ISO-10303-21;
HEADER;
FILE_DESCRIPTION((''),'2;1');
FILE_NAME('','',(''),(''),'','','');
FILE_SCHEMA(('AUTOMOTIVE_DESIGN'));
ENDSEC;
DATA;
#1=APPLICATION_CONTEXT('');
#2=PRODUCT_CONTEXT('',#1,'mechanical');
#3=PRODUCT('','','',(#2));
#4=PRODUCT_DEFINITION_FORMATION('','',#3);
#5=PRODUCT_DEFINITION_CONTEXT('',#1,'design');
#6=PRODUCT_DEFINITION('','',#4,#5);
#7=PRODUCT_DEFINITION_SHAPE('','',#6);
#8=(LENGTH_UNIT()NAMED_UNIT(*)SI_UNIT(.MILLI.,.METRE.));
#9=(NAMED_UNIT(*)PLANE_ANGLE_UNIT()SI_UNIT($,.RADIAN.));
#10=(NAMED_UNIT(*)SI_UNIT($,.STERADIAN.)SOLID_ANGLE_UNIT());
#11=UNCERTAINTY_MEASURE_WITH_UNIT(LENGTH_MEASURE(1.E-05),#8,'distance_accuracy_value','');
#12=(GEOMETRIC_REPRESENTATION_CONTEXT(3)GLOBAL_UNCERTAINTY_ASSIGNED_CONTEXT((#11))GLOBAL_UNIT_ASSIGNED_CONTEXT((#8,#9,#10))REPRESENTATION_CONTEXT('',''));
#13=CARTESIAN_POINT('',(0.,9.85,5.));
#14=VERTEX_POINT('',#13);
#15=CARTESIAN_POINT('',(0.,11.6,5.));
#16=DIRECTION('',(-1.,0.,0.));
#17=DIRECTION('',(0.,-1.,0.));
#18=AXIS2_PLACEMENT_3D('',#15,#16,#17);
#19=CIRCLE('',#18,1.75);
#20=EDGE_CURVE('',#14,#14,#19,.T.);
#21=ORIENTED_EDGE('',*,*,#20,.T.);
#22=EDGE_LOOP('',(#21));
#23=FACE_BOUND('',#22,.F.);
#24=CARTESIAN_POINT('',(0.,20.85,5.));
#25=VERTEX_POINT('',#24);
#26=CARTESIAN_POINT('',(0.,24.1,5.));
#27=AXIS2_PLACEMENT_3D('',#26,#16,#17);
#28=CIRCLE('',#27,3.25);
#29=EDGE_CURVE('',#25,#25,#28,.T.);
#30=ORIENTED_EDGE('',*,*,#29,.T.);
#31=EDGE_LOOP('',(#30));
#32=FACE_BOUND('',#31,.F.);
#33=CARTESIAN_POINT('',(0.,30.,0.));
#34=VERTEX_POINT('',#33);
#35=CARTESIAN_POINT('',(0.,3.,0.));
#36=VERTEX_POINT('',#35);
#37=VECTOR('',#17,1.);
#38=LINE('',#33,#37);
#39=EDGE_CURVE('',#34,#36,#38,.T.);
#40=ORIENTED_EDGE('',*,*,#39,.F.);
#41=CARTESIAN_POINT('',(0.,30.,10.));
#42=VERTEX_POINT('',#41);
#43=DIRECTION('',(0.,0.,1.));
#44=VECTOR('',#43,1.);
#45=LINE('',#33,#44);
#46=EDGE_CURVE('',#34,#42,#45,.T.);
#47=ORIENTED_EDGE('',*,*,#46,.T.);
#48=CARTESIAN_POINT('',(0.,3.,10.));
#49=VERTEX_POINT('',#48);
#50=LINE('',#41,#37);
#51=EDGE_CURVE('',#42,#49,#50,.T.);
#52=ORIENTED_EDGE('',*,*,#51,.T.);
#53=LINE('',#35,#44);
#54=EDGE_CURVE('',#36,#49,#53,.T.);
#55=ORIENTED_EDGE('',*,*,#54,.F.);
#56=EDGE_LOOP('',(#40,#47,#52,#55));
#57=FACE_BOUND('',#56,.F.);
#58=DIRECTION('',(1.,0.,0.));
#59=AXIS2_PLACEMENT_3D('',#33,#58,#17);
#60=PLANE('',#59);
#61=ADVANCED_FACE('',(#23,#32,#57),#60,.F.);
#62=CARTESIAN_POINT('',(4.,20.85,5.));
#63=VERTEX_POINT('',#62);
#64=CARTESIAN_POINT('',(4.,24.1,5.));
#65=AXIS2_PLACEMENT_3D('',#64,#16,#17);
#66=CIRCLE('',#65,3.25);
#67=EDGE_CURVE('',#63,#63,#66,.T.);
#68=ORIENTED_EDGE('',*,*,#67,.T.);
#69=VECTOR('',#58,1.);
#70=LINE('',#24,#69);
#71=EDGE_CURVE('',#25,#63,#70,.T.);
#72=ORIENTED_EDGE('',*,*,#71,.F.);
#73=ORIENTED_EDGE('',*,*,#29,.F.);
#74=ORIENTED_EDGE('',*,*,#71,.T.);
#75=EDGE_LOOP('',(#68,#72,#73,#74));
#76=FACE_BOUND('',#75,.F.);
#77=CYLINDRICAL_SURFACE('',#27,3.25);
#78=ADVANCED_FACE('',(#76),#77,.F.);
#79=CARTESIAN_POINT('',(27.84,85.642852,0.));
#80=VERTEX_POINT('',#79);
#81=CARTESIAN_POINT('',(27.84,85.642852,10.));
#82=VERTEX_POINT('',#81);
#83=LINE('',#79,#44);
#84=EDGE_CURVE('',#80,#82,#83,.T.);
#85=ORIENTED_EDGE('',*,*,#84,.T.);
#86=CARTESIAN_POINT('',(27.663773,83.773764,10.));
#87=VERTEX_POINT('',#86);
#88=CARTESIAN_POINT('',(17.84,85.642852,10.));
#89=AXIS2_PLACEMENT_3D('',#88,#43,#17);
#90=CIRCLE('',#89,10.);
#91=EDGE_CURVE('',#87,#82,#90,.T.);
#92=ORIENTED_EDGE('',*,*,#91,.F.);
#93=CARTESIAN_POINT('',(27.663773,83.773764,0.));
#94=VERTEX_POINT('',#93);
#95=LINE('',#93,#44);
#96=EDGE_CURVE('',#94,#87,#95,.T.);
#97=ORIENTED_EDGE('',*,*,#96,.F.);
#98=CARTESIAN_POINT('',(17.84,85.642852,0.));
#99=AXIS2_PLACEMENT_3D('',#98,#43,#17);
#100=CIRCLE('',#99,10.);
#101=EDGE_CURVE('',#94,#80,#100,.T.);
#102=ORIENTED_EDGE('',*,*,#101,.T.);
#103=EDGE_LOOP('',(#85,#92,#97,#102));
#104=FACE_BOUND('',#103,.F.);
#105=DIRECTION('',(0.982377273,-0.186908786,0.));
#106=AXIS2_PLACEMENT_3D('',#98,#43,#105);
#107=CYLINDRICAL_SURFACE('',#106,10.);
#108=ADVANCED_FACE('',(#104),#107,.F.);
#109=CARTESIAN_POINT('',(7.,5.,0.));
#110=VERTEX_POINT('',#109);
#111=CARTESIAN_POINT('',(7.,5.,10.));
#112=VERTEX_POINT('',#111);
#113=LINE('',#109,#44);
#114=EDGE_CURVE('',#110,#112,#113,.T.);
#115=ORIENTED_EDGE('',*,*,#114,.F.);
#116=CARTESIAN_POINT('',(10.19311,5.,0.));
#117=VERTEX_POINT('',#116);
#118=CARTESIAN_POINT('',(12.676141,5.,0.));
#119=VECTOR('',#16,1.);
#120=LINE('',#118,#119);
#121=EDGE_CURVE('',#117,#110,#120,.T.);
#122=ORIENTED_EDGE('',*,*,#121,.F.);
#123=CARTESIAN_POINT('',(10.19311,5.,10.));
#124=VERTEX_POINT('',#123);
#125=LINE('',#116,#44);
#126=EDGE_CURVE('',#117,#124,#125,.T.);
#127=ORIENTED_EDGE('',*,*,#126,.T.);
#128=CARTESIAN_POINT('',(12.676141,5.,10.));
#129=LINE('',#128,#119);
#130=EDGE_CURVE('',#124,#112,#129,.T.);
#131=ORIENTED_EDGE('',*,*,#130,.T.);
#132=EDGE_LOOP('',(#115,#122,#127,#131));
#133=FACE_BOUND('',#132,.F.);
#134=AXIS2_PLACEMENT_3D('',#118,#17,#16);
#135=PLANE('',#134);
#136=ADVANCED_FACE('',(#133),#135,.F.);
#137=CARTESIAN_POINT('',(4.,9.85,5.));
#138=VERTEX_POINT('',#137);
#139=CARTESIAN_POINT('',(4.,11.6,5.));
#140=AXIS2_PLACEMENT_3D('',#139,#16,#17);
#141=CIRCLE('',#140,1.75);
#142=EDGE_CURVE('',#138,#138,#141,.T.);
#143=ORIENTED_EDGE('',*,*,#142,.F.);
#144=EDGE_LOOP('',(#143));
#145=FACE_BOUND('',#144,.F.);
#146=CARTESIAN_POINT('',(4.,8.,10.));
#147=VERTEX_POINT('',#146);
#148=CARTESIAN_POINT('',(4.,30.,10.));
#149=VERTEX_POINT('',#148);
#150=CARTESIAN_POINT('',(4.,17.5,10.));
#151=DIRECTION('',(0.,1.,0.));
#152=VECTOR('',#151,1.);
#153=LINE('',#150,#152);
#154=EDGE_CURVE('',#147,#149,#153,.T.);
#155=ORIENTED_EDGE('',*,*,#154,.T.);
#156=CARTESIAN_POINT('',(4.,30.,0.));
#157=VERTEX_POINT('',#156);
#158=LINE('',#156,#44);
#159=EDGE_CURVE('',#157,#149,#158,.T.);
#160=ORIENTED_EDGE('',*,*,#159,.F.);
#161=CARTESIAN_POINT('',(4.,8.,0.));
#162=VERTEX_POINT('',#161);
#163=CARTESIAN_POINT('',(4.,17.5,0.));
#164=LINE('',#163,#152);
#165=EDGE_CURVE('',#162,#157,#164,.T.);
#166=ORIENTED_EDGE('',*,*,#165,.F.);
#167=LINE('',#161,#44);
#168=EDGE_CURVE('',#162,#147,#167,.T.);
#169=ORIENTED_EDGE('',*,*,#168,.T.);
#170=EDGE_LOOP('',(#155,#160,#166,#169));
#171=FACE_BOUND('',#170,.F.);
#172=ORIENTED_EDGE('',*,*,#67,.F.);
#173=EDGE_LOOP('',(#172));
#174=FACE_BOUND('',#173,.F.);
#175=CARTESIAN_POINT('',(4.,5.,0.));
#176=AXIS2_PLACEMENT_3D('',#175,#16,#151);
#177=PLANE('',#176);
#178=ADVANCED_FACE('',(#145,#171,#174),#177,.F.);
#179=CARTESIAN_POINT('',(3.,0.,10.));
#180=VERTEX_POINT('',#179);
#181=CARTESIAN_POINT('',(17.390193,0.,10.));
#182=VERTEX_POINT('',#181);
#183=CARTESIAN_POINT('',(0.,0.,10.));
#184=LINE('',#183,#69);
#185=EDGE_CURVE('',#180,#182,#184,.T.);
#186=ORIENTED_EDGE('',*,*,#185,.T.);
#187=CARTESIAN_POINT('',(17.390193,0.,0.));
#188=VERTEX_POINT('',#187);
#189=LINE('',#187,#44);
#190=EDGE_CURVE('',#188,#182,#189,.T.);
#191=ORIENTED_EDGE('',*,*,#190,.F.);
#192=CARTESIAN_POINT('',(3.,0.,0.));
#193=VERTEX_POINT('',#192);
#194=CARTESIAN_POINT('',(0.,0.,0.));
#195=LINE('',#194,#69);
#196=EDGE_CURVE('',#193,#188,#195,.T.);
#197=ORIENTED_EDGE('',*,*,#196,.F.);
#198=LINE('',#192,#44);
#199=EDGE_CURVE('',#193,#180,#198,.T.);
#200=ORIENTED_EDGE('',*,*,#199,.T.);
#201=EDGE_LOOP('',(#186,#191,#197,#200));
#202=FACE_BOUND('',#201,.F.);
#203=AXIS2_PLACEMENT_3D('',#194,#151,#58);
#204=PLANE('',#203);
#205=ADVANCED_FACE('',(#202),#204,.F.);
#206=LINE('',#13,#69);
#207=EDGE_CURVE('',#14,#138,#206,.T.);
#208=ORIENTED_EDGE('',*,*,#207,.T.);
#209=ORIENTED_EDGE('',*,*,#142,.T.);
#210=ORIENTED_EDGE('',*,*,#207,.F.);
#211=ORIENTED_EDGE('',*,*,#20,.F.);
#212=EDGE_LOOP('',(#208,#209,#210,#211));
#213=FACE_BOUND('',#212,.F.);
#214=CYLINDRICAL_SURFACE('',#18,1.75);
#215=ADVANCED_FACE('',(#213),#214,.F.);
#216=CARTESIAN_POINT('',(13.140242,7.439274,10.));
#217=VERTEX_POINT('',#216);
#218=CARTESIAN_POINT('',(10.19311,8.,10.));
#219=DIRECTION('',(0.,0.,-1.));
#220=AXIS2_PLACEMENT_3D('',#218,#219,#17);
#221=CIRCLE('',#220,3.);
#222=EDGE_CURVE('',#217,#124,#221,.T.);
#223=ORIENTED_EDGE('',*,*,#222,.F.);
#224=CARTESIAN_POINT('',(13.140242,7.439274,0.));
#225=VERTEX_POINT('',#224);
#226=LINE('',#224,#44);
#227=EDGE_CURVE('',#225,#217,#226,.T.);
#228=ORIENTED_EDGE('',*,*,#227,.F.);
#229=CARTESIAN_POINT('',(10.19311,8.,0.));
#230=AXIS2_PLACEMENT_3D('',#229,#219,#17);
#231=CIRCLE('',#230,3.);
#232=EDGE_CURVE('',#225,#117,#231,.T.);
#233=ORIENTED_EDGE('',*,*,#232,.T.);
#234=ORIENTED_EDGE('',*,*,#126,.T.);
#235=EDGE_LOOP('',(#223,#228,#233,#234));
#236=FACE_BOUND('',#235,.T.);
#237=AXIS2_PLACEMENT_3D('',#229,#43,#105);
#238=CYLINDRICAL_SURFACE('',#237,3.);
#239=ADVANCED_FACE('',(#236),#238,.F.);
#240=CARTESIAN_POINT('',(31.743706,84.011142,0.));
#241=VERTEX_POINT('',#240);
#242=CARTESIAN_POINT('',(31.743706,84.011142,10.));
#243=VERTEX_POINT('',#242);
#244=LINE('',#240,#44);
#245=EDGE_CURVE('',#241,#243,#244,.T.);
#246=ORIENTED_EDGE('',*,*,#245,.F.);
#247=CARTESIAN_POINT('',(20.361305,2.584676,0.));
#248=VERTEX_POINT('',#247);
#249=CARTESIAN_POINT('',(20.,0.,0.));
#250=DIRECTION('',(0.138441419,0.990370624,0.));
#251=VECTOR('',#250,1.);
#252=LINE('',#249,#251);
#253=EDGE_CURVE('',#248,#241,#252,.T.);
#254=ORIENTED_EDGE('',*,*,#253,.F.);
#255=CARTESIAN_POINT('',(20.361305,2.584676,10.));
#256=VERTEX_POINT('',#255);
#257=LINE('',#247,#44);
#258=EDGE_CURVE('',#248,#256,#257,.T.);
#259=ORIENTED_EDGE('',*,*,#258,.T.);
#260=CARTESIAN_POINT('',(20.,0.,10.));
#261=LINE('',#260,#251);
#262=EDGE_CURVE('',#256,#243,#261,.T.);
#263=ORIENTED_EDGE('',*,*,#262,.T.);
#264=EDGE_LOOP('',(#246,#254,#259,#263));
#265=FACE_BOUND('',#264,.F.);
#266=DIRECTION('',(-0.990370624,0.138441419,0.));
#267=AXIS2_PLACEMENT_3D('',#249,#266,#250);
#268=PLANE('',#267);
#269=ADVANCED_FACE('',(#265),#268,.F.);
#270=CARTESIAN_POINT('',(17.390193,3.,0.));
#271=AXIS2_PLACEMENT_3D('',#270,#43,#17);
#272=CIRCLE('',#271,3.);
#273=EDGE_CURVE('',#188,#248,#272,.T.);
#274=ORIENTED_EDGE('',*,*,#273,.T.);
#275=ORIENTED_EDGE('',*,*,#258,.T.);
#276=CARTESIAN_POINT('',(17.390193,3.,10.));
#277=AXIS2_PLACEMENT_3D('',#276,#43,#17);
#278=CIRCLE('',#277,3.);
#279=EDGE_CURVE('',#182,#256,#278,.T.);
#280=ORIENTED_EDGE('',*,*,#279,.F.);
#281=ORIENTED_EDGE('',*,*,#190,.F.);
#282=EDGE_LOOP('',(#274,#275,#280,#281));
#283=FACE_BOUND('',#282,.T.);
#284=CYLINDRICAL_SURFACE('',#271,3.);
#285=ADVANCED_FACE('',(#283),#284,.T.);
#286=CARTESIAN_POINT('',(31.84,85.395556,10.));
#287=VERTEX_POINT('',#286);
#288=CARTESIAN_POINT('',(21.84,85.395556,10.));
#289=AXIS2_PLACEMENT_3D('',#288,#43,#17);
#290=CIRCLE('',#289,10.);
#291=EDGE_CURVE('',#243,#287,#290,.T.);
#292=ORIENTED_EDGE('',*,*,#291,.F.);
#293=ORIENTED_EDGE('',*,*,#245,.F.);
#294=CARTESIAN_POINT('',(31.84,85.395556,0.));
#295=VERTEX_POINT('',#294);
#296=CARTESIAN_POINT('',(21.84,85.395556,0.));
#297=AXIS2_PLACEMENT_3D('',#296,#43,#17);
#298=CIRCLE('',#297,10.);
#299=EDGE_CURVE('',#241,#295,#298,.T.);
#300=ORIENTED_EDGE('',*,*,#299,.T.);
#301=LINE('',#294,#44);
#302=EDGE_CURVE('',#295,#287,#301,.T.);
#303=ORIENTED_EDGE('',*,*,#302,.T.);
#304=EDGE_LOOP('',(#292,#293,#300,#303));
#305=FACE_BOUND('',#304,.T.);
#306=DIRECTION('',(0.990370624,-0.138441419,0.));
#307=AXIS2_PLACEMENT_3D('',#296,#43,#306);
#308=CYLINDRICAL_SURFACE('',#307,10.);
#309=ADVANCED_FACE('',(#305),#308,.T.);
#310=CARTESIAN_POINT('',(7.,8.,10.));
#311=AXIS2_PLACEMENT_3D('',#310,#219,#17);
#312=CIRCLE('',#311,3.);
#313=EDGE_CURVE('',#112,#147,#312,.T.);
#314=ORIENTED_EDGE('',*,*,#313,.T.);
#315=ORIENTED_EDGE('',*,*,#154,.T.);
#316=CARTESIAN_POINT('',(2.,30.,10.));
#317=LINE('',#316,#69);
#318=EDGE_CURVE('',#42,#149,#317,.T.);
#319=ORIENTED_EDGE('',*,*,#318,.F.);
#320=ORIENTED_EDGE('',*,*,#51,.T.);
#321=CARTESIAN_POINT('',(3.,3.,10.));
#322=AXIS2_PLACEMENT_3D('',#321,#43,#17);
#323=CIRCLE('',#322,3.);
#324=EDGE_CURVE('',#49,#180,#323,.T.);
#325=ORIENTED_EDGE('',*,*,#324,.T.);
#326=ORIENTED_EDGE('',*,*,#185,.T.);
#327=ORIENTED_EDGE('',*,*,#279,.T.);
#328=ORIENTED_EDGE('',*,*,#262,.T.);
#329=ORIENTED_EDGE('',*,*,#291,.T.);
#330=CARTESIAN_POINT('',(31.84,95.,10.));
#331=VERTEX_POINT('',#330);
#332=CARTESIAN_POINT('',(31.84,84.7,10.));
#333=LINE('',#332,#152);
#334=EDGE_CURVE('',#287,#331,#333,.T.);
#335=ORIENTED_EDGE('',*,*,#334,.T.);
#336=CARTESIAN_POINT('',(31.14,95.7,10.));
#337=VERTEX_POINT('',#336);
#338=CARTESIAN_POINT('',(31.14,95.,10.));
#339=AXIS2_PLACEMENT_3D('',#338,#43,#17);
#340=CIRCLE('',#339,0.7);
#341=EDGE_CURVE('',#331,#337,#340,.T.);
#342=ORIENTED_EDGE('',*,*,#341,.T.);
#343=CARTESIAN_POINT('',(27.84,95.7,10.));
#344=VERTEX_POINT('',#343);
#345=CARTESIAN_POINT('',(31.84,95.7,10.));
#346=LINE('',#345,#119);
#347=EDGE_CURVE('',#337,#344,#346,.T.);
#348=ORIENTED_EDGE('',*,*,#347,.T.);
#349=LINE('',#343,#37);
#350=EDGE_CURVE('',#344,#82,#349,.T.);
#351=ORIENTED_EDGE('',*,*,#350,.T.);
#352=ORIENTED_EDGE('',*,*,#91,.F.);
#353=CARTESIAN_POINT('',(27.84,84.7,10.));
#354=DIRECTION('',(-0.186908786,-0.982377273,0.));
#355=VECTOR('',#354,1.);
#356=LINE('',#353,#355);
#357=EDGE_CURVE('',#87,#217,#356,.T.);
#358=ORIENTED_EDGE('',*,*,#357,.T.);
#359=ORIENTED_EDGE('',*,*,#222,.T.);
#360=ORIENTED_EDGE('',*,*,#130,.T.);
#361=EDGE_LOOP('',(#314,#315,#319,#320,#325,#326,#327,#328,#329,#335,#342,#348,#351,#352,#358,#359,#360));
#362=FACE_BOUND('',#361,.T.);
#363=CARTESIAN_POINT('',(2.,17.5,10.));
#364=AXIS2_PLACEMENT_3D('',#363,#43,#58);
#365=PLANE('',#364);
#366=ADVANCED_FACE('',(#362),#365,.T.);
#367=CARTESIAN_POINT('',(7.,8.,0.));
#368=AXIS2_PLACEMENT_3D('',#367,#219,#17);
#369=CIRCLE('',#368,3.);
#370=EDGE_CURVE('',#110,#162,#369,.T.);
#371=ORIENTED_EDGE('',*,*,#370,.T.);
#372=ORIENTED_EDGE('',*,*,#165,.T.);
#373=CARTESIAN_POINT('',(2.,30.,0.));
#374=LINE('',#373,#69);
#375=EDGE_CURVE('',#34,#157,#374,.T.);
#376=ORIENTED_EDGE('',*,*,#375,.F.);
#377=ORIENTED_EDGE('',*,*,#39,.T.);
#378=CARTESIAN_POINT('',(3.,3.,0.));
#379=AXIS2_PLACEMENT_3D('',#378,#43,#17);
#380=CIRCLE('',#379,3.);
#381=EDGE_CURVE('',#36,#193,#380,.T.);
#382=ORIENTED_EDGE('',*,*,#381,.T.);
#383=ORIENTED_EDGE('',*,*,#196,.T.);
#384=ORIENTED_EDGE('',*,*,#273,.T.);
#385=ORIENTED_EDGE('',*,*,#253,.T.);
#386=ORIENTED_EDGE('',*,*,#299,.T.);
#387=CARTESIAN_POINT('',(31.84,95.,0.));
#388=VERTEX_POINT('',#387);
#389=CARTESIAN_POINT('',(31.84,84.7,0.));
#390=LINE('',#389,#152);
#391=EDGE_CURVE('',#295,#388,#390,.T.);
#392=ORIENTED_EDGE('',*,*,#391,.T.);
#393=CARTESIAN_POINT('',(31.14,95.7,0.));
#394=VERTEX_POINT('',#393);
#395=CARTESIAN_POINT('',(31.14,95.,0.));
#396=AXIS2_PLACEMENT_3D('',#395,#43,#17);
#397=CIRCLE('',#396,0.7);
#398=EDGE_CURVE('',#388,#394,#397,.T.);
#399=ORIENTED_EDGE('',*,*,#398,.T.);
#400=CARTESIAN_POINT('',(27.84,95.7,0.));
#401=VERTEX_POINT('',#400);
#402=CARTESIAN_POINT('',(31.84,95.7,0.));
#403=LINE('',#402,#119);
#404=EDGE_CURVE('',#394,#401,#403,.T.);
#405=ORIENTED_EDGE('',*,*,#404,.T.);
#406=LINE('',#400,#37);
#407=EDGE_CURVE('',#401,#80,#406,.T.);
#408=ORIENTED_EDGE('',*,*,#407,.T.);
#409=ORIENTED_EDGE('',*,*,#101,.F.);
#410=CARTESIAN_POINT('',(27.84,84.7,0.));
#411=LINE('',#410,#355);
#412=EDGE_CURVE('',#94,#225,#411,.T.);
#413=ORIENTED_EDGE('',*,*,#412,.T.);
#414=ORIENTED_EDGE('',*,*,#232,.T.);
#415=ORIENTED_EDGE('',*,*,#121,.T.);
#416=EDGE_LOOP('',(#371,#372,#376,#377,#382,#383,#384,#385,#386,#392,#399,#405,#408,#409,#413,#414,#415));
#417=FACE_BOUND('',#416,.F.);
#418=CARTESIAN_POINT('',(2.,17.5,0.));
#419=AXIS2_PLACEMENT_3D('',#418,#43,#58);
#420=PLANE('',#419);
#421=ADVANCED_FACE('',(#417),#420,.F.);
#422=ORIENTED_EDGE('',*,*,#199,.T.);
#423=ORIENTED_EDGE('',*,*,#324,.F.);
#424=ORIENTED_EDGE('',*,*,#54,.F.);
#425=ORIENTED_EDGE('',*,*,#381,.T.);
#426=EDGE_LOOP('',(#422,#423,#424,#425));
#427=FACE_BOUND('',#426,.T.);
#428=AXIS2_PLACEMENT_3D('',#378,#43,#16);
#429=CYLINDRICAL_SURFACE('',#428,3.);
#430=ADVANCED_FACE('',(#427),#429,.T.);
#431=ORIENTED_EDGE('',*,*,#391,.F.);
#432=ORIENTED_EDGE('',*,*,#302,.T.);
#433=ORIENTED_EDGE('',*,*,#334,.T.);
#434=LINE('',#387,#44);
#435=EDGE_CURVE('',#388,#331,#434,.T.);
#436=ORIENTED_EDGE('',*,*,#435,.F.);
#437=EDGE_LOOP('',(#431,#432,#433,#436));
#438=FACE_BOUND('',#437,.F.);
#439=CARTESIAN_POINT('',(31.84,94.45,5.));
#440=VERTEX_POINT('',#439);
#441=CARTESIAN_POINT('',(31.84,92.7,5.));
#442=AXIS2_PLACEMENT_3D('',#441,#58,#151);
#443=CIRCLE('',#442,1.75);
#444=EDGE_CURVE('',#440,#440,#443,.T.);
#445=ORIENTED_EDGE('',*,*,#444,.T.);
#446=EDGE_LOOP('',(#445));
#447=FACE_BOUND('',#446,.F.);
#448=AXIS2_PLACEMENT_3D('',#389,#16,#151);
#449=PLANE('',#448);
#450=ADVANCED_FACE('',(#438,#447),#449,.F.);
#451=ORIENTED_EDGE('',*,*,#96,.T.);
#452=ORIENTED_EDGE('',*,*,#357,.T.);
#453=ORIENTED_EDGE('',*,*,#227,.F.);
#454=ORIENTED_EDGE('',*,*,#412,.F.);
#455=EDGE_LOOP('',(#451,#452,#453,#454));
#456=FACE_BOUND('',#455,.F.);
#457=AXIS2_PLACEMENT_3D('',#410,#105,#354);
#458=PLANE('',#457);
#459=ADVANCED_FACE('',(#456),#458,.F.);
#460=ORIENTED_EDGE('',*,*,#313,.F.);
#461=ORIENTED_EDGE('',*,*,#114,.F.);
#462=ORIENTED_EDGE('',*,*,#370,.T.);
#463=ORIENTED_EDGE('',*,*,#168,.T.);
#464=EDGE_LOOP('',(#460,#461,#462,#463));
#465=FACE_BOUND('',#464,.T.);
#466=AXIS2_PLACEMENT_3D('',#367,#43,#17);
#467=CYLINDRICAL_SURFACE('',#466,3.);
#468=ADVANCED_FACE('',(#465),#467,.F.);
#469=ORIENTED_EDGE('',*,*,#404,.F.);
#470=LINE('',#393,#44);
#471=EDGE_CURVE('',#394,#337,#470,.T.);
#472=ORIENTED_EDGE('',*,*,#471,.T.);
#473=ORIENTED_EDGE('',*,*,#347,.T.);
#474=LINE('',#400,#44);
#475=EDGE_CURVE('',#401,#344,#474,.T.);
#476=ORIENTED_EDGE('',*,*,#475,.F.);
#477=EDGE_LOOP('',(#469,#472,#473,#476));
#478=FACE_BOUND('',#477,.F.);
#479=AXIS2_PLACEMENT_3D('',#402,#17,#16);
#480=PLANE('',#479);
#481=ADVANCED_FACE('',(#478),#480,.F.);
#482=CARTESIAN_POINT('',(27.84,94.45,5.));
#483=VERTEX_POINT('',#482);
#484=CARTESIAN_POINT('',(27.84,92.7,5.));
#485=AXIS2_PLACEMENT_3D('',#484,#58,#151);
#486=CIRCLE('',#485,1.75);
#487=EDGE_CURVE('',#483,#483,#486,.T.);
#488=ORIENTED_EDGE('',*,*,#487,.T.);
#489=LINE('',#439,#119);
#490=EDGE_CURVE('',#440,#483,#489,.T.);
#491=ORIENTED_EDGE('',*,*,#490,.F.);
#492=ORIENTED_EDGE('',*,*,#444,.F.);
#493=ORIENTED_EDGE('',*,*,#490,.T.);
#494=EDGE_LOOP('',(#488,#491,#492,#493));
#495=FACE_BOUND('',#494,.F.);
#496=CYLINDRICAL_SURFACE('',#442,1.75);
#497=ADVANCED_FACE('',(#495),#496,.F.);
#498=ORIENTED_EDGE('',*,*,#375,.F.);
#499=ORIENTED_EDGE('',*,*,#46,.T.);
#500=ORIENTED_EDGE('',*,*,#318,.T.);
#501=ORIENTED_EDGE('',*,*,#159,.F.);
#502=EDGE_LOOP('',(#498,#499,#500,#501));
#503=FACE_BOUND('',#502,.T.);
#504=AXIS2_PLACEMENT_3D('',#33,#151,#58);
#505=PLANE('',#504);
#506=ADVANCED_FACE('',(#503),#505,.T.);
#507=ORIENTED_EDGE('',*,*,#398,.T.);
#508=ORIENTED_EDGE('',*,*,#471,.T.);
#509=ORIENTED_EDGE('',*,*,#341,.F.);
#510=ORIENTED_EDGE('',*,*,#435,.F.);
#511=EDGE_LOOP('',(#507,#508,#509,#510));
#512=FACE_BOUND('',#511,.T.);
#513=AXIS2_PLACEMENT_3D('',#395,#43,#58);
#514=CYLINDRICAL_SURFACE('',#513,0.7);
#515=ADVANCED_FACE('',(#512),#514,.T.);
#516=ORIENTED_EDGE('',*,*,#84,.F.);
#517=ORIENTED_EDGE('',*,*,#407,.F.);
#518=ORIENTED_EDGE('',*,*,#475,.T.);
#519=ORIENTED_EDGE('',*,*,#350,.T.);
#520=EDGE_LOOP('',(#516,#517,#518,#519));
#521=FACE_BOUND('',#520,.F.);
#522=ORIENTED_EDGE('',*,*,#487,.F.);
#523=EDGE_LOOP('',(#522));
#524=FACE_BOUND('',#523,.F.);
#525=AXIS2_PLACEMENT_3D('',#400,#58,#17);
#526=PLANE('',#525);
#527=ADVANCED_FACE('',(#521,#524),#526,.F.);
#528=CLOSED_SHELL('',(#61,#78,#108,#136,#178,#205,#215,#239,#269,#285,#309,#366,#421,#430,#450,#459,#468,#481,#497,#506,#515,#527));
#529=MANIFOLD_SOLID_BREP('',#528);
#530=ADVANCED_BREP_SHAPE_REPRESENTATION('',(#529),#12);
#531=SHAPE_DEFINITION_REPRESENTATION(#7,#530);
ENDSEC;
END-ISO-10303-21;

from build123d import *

# Parameters (mm, degrees)
F0_W     = 4
F0_H     = 25
F1_DEPTH = 10
F2_R     = 3
F3_R     = 10
F4_R     = 1.75
F5_DEPTH = 5
F6_R     = 3.25
F6_R_2   = 1.75
F7_DEPTH = 6
F8_R     = 0.7


# Not quite as in the source:
# - a feature names something its author has since deleted; it is built from what else it names


with BuildPart() as f1:
    # F0 (on Top) → F1 (new body)
    with BuildSketch(Plane.XY):
        with Locations((2, 17.5)):
            Rectangle(F0_W, F0_H)
        Polygon((0, 5), (0, 0), (20, 0), (31.84, 84.7), (31.84, 95.7), (27.84, 95.7), (27.84, 84.7), (12.6761412248, 5), (4, 5), align=None)
    extrude(amount=F1_DEPTH)

    # F2
    f2_edges = [f1.edges().sort_by_distance(p)[0] for p in [
        (12.676141, 5, 5),
        (4, 5, 5),
        (0, 0, 5),
        (20, 0, 5),
    ]]
    fillet(f2_edges, radius=F2_R)

    # F3
    f3_edges = [f1.edges().sort_by_distance(p)[0] for p in [
        (27.84, 84.7, 5),
        (31.84, 84.7, 5),
    ]]
    fillet(f3_edges, radius=F3_R)

    # F4 (on face) → F5 (cut)
    with BuildSketch(Plane.YZ.offset(31.84)):
        with Locations((92.7, 5)):
            Circle(F4_R)
    extrude(amount=-F5_DEPTH, mode=Mode.SUBTRACT)

    # F6 (on face) → F7 (cut)
    with BuildSketch(Plane(origin=(0, 0, 0), x_dir=(0, -1, 0), z_dir=(-1, 0, 0))):
        with Locations((-24.1, 5)):
            Circle(F6_R)
        with Locations((-11.6, 5)):
            Circle(F6_R_2)
    extrude(amount=-F7_DEPTH, mode=Mode.SUBTRACT)

    # F8
    f8_edges = [f1.edges().sort_by_distance(p)[0] for p in [
        (31.84, 95.7, 5),
    ]]
    fillet(f8_edges, radius=F8_R)


solid = f1.part
